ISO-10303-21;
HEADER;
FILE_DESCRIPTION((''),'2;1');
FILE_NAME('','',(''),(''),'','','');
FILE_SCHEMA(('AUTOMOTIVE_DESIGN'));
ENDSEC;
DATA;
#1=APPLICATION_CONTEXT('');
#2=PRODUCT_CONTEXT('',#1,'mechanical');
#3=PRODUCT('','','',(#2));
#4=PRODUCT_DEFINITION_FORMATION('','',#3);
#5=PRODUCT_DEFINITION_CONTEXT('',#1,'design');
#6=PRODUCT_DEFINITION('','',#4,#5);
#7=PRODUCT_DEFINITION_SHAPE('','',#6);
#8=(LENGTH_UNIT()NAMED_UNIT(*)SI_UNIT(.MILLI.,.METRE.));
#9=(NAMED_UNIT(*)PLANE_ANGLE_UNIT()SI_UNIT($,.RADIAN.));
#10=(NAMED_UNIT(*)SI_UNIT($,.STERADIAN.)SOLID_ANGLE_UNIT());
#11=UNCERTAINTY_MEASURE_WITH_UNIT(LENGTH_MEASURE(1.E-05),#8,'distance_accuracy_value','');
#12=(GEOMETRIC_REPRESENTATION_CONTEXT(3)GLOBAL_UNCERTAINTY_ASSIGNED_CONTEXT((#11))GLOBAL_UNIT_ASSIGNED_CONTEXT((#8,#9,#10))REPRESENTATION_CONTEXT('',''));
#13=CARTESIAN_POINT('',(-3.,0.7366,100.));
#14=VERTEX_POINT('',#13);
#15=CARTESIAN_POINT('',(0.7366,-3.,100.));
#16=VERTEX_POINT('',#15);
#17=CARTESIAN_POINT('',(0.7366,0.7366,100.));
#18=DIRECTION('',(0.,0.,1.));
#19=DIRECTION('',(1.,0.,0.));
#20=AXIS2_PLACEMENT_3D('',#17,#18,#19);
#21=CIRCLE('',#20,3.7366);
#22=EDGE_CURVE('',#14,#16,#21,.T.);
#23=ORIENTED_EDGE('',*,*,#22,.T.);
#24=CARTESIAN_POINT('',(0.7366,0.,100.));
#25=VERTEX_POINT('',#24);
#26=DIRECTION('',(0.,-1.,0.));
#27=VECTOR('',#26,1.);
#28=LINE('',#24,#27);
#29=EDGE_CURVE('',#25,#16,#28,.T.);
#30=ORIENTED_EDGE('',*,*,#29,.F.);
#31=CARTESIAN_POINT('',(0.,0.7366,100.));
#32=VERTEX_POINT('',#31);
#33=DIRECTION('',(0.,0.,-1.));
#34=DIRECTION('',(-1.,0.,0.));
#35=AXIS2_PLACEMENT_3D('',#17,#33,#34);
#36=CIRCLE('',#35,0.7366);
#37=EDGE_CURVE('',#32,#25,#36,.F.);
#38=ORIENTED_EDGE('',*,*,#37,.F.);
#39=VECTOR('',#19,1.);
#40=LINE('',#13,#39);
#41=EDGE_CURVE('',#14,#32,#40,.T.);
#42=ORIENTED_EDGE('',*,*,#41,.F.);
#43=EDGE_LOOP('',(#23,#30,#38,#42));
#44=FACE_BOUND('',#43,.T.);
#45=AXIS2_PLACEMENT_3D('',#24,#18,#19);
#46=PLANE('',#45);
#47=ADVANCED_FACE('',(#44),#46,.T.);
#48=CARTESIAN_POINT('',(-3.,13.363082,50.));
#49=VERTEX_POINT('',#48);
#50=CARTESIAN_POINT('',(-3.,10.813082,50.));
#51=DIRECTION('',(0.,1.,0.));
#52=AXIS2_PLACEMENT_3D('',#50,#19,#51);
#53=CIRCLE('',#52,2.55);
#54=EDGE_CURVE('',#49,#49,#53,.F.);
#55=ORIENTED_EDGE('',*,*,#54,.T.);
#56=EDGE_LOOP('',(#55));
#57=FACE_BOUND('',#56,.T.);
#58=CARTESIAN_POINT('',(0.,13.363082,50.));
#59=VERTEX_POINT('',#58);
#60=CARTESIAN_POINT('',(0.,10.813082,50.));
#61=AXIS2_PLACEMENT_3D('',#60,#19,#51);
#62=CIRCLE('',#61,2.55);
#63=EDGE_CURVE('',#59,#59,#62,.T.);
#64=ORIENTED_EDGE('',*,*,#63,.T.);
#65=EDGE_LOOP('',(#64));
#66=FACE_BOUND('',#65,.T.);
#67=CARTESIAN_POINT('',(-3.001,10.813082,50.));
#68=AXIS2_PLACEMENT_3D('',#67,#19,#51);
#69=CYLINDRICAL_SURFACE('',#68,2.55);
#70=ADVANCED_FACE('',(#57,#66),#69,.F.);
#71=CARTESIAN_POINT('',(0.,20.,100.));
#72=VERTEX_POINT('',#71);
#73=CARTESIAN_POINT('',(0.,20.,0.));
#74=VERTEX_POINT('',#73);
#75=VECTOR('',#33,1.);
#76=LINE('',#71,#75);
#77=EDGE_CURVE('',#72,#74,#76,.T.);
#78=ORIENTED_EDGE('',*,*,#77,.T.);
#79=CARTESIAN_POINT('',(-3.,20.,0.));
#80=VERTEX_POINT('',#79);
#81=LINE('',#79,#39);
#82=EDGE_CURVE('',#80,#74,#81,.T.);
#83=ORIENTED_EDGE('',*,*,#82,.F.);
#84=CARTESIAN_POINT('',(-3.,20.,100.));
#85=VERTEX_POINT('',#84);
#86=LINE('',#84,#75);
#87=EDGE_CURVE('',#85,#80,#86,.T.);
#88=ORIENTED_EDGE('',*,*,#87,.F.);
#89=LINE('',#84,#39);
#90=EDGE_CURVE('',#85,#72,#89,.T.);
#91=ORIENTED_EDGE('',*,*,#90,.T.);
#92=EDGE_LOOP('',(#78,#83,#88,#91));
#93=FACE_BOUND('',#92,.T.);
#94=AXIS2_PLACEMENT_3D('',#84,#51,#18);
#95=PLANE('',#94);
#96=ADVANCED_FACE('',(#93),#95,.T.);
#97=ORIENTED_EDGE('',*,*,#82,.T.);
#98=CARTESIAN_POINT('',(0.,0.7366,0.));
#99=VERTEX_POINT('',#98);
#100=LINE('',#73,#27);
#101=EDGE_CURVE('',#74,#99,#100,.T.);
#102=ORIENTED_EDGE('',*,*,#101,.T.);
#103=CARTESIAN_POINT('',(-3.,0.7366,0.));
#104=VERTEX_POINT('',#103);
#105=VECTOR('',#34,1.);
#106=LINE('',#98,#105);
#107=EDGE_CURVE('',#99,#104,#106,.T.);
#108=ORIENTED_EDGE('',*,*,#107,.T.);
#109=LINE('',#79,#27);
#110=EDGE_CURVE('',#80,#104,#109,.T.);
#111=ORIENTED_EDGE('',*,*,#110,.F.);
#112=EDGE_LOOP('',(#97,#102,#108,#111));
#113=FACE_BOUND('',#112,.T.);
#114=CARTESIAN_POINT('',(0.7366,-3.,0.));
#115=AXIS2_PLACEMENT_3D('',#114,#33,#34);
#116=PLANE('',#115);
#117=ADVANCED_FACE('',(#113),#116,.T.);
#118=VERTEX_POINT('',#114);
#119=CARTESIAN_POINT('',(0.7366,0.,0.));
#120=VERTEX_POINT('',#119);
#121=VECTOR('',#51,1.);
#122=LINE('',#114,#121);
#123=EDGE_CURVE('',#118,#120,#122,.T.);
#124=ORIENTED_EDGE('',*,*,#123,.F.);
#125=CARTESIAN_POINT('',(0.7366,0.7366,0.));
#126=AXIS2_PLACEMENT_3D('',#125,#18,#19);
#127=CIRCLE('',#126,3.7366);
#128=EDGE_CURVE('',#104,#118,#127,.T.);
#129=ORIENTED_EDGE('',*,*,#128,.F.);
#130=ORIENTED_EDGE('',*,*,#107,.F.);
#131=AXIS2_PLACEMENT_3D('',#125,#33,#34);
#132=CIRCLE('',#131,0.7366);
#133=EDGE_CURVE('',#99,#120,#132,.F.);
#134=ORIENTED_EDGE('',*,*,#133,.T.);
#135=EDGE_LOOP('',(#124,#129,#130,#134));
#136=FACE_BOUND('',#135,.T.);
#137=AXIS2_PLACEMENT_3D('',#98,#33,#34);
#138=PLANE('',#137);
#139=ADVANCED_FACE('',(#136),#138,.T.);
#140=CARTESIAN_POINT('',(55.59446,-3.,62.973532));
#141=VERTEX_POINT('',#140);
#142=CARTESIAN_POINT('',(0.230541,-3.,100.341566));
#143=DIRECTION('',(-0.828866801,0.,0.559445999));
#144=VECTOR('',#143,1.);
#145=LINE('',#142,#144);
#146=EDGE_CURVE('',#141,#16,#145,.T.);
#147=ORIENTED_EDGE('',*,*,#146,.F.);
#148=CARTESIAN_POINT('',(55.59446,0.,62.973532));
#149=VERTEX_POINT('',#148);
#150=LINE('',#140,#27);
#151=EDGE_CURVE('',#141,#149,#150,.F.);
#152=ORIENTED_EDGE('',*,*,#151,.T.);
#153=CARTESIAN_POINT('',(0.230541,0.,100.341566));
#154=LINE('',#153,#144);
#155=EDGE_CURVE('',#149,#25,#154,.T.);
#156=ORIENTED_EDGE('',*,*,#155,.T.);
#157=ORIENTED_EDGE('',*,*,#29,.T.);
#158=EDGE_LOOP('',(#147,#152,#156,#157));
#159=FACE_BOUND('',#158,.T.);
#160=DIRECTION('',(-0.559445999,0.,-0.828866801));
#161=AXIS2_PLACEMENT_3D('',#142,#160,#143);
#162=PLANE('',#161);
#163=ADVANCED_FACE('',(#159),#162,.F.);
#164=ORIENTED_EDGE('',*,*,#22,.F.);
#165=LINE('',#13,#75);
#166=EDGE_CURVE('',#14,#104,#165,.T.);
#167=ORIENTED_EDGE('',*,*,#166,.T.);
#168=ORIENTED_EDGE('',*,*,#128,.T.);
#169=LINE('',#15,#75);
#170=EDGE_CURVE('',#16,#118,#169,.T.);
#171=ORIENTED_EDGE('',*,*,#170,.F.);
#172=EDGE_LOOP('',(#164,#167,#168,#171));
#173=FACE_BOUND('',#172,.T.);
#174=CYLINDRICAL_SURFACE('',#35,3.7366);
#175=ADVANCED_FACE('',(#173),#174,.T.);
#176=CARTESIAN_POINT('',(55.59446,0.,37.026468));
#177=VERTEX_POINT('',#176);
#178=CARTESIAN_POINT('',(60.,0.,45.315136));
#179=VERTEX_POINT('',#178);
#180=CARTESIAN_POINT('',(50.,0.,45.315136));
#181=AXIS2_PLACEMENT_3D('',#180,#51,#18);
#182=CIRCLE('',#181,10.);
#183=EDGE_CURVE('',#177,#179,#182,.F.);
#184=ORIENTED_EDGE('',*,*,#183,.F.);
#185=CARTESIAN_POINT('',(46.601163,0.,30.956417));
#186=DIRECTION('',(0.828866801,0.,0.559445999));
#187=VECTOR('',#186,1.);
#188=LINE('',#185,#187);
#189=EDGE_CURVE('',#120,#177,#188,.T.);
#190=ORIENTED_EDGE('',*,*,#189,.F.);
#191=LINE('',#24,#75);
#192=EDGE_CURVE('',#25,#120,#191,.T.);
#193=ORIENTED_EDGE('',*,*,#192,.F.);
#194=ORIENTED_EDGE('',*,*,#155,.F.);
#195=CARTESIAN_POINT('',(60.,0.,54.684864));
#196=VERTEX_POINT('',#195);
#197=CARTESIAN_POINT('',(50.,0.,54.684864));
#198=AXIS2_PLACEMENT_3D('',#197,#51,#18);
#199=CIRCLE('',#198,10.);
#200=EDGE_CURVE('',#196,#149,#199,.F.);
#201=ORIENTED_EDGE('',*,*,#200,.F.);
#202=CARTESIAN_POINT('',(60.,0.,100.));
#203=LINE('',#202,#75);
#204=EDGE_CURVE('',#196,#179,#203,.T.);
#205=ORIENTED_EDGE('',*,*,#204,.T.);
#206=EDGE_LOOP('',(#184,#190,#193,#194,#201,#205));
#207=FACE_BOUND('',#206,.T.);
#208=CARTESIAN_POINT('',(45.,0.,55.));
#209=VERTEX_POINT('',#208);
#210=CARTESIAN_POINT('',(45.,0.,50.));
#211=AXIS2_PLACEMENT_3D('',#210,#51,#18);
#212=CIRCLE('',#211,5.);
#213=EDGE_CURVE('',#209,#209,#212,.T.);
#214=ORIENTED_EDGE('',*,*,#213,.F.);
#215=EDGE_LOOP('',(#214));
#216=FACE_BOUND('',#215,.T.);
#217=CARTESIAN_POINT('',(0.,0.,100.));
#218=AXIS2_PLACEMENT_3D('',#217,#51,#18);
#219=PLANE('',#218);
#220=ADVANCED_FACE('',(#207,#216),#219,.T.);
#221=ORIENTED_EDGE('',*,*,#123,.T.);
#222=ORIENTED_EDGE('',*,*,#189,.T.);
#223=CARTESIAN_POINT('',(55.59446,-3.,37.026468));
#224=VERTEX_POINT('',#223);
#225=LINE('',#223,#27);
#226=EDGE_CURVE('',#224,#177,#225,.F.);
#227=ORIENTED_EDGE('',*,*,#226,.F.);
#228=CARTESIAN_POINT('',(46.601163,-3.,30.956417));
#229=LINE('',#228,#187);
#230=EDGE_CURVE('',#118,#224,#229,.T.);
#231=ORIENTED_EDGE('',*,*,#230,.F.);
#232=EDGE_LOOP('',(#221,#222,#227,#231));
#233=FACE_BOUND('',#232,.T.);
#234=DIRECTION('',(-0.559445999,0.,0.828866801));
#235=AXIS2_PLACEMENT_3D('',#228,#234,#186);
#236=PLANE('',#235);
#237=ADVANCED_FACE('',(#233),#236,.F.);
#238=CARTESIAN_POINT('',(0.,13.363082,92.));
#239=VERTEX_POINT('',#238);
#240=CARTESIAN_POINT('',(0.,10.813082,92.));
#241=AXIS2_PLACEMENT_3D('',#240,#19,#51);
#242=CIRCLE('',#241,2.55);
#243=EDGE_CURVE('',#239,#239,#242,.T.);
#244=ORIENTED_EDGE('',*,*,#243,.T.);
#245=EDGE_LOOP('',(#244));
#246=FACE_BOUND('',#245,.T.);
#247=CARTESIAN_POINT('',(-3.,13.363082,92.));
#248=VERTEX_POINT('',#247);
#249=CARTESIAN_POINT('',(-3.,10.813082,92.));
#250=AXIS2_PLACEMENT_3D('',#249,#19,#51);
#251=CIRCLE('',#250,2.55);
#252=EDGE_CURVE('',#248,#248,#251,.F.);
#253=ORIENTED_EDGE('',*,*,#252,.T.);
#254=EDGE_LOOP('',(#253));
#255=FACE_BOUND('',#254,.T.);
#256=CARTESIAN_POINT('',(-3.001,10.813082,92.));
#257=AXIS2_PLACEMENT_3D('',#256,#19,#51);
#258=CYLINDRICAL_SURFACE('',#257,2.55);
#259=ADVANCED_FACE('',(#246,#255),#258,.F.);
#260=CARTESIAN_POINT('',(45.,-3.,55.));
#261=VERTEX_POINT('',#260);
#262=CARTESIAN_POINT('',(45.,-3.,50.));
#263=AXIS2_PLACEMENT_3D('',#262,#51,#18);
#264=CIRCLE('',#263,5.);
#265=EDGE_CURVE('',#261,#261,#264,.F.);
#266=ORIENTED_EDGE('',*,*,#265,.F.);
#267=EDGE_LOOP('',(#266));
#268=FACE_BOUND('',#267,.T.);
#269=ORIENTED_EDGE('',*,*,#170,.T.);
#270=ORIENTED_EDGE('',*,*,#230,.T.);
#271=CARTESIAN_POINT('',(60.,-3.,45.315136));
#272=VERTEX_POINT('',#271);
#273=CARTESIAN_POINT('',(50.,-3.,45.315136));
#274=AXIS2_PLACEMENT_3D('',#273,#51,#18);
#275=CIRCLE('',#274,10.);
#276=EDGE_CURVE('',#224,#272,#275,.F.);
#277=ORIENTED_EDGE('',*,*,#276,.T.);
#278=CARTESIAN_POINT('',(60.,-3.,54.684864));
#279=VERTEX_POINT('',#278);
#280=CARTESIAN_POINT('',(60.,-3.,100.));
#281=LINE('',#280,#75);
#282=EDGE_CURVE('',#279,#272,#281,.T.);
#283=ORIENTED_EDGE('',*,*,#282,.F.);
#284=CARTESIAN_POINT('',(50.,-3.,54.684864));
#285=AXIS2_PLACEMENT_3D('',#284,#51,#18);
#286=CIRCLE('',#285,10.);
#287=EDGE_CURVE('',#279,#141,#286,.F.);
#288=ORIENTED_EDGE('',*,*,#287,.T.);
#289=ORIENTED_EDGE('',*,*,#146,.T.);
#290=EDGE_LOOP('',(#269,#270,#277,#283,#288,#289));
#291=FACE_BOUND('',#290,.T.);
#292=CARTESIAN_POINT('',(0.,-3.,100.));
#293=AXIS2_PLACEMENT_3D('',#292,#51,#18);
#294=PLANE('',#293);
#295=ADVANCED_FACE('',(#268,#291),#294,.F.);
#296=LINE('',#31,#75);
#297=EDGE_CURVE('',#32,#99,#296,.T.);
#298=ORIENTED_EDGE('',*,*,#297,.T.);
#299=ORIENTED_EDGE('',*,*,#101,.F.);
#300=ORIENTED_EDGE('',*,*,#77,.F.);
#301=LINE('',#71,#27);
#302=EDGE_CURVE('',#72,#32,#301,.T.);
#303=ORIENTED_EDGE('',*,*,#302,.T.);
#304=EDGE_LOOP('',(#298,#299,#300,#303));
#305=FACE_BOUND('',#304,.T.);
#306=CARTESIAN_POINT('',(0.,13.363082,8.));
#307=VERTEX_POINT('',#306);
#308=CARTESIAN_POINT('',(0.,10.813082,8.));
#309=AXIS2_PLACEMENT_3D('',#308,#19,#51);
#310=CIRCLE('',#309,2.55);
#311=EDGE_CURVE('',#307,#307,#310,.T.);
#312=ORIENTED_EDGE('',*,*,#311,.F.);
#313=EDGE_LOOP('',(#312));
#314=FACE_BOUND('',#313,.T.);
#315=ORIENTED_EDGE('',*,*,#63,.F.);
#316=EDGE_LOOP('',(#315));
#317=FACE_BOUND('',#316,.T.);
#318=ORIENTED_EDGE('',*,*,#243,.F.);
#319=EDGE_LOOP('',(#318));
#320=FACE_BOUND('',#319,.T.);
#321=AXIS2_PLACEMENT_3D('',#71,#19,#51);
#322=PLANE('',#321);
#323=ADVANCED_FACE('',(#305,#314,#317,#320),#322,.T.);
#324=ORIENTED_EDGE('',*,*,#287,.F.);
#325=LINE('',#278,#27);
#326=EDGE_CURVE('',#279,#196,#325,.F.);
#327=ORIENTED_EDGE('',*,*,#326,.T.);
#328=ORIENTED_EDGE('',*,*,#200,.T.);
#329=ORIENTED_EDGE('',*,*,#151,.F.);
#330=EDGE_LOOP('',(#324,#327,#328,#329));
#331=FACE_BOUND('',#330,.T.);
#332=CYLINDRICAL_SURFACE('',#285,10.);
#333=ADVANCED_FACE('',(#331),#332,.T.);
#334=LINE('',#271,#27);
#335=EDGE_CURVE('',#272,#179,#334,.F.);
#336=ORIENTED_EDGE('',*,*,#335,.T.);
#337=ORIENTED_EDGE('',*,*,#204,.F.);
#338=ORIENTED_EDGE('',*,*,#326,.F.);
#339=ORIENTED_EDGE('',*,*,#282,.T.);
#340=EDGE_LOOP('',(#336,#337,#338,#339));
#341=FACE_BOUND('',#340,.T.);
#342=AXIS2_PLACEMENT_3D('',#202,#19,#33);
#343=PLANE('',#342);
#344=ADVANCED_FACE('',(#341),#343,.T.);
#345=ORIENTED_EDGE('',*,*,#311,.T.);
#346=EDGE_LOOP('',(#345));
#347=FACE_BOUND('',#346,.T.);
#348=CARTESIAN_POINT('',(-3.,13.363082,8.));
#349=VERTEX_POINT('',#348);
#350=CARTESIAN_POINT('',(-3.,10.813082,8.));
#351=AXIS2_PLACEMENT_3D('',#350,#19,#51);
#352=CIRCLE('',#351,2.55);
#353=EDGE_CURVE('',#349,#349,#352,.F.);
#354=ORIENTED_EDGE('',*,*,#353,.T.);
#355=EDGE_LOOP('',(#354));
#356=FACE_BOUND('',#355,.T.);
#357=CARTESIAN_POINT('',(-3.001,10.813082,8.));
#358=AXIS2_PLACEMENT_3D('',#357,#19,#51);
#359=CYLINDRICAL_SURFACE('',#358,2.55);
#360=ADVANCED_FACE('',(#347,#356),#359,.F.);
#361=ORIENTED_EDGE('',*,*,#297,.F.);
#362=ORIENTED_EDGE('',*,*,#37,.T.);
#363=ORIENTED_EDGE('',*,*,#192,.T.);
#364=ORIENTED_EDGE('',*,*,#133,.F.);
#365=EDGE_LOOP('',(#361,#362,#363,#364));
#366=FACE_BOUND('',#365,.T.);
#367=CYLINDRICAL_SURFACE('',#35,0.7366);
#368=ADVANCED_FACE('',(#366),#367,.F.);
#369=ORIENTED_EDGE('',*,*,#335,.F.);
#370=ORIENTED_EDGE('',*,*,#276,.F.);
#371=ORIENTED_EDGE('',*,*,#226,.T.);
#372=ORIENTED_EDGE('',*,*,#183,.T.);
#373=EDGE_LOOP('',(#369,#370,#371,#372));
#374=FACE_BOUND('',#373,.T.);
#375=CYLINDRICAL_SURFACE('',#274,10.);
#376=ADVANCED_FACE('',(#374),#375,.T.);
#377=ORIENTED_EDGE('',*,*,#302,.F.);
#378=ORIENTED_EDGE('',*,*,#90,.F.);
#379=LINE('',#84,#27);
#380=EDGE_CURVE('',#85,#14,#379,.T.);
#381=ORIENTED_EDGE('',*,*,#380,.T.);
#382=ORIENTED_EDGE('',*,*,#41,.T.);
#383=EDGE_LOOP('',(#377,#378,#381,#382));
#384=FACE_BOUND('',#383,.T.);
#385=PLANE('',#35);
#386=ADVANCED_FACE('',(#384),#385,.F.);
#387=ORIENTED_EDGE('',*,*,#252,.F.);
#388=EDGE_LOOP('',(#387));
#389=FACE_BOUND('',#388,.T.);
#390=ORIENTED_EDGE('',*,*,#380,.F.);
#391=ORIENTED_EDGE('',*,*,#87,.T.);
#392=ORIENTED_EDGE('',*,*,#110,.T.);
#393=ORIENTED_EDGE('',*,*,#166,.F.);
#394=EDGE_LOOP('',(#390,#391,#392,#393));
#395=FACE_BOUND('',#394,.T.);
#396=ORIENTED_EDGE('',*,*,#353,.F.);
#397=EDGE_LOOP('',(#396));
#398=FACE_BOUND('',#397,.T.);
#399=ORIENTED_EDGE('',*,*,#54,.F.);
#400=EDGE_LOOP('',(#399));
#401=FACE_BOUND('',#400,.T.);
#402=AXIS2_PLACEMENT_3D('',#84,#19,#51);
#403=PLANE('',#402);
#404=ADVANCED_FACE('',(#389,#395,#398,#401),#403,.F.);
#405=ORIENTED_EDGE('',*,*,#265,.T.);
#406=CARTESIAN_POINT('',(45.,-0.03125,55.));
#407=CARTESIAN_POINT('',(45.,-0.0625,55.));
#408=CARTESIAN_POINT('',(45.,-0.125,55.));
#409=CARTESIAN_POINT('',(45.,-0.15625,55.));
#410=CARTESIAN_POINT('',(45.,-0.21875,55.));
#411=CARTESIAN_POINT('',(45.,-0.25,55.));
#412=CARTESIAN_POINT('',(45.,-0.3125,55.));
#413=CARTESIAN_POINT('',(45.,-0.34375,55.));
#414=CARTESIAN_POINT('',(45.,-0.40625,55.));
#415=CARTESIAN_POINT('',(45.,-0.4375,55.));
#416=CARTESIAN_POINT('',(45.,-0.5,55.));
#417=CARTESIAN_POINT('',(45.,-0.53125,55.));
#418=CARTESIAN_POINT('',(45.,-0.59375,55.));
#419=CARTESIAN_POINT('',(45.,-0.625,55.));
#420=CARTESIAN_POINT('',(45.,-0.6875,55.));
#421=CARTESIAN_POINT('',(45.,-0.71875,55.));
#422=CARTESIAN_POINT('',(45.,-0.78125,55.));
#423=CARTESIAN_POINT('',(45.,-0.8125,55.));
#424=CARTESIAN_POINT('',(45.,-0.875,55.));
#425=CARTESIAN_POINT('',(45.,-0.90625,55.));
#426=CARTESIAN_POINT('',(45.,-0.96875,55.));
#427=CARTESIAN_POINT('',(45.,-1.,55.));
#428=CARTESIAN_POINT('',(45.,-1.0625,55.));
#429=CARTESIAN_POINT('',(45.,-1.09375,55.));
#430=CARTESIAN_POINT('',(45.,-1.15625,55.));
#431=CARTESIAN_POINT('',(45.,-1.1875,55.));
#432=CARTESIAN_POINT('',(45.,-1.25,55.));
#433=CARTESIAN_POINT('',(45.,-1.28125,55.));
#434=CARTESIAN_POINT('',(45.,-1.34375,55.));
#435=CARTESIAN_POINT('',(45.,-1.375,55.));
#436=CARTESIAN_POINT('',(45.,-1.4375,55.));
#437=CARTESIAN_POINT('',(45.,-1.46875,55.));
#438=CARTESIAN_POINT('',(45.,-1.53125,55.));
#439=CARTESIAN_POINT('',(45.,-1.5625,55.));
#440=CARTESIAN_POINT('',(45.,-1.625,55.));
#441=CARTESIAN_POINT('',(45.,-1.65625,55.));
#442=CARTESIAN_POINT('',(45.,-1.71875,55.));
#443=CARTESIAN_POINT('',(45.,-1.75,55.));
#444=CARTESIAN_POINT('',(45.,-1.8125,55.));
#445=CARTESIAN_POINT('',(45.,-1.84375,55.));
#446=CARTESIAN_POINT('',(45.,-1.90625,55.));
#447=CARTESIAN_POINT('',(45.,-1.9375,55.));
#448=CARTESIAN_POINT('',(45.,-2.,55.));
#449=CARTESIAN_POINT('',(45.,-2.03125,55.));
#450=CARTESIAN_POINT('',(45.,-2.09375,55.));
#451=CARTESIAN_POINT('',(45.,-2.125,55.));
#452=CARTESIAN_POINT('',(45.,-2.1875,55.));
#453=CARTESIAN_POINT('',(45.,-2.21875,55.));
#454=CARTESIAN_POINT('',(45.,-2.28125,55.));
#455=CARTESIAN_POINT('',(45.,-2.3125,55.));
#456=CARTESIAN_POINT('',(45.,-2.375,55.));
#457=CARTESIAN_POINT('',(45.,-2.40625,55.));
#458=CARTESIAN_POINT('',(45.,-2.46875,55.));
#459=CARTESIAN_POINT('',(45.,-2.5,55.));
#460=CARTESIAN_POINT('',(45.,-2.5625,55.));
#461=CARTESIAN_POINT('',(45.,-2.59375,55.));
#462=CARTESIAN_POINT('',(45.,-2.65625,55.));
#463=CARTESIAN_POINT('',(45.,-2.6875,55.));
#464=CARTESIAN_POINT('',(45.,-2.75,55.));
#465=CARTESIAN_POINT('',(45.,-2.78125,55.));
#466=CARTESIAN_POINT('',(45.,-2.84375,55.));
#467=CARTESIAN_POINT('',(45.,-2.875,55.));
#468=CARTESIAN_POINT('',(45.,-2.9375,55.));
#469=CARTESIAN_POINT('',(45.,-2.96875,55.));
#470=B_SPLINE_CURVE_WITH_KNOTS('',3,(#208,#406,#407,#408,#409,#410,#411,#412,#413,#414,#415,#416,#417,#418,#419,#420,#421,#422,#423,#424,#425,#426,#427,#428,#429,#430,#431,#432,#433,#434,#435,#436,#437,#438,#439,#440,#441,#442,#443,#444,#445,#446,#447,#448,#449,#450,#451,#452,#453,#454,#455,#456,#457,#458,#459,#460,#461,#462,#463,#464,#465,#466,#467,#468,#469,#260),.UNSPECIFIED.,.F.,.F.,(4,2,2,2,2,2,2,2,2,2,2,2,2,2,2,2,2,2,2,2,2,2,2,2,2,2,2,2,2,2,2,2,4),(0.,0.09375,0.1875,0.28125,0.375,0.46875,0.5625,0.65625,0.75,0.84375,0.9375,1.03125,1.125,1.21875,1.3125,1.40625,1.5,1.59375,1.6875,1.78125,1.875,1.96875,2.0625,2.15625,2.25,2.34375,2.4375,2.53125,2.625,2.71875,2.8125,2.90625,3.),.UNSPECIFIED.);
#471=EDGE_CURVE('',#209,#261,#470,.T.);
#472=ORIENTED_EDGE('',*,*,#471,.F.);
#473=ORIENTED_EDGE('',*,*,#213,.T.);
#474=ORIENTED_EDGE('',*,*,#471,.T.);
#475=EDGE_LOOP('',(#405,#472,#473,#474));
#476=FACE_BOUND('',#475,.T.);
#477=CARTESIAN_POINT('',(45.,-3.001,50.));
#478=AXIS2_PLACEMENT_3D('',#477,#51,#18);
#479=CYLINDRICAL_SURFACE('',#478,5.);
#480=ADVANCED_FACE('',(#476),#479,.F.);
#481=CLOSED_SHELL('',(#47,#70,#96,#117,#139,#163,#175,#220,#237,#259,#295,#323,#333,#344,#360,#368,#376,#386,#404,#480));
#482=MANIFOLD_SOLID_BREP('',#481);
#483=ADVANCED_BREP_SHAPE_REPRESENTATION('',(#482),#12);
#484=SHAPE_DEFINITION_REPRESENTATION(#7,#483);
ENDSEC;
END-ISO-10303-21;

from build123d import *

# Parameters (mm, degrees)
BASE_FLANGE1_DEPTH = 100
CUT_EXTRUDE1_REACH = 120.322
SKETCH6_R          = 2.55
CUT_EXTRUDE2_REACH = 120.322
SKETCH7_R          = 5
CUT_EXTRUDE4_DEPTH = 10


# Sheet-metal steps are written as plain solids
with BuildPart() as part:
    # Sketch1 → Base-Flange1 (new body)
    with BuildSketch(Plane.XY):
        with BuildLine():
            Line((0, 20), (0, 0.7366))
            ThreePointArc((0, 0.7366), (0.215745145, 0.215745145), (0.7366, 0))
            Line((0.7366, 0), (60, 0))
            Line((60, 0), (60, -3))
            Line((60, -3), (0.7366, -3))
            ThreePointArc((0.7366, -3), (-1.905575199, -1.905575199), (-3, 0.7366))
            Line((-3, 0.7366), (-3, 20))
            Line((-3, 20), (0, 20))
        make_face()
    extrude(amount=BASE_FLANGE1_DEPTH)

    # Sketch6 → Cut-Extrude1 (cut, up to next)
    with BuildSketch(Plane(origin=(0, 0, 0), x_dir=(0, 0, -1), z_dir=(1, 0, 0)), mode=Mode.PRIVATE) as cut_extrude1_sk1:
        with Locations(Location((-92, 10.813082186, 0), (0, 0, 90))):
            Circle(SKETCH6_R)
    cut_extrude1_tool1 = extrude(cut_extrude1_sk1.sketch, amount=-CUT_EXTRUDE1_REACH, mode=Mode.PRIVATE) & part.part
    # Sketch6 → Cut-Extrude1 (cut, up to next)
    with BuildSketch(Plane(origin=(0, 0, 0), x_dir=(0, 0, -1), z_dir=(1, 0, 0)), mode=Mode.PRIVATE) as cut_extrude1_sk2:
        with Locations(Location((-8, 10.813082186, 0), (0, 0, 90))):
            Circle(SKETCH6_R)
    cut_extrude1_tool2 = extrude(cut_extrude1_sk2.sketch, amount=-CUT_EXTRUDE1_REACH, mode=Mode.PRIVATE) & part.part
    # Sketch6 → Cut-Extrude1 (cut, up to next)
    with BuildSketch(Plane(origin=(0, 0, 0), x_dir=(0, 0, -1), z_dir=(1, 0, 0)), mode=Mode.PRIVATE) as cut_extrude1_sk3:
        with Locations(Location((-50, 10.813082186, 0), (0, 0, 90))):
            Circle(SKETCH6_R)
    cut_extrude1_tool3 = extrude(cut_extrude1_sk3.sketch, amount=-CUT_EXTRUDE1_REACH, mode=Mode.PRIVATE) & part.part
    add(cut_extrude1_tool1.solids().sort_by_distance((0, 10.813082, 92))[0], mode=Mode.SUBTRACT)
    add(cut_extrude1_tool2.solids().sort_by_distance((0, 10.813082, 8))[0], mode=Mode.SUBTRACT)
    add(cut_extrude1_tool3.solids().sort_by_distance((0, 10.813082, 50))[0], mode=Mode.SUBTRACT)

    # Sketch7 → Cut-Extrude2 (cut, up to next)
    with BuildSketch(Plane(origin=(0, 0, 0), x_dir=(1, 0, 0), z_dir=(0, 1, 0)), mode=Mode.PRIVATE) as cut_extrude2_sk1:
        with Locations(Location((45, -50, 0), (0, 0, 270))):
            Circle(SKETCH7_R)
    cut_extrude2_tool1 = extrude(cut_extrude2_sk1.sketch, amount=-CUT_EXTRUDE2_REACH, mode=Mode.PRIVATE) & part.part
    add(cut_extrude2_tool1.solids().sort_by_distance((45, 0, 50))[0], mode=Mode.SUBTRACT)

    # Sketch8 → Cut-Extrude4 (cut)
    with BuildSketch(Plane(origin=(0, 0, 0), x_dir=(1, 0, 0), z_dir=(0, 1, 0))):
        with BuildLine():
            Line((0.7366, 0), (55.594459994, -37.026468271))
            ThreePointArc((55.594459994, -37.026468271), (58.830192522, -40.621768617), (60, -45.315136281))
            Line((60, -45.315136281), (60, -54.684863719))
            ThreePointArc((60, -54.684863719), (58.830192522, -59.378231383), (55.594459994, -62.973531729))
            Line((55.594459994, -62.973531729), (0.7366, -100))
            Line((0.7366, -100), (64.682636993, -100))
            Line((64.682636993, -100), (64.682636993, 0))
            Line((64.682636993, 0), (0.7366, 0))
        make_face()
    extrude(amount=-CUT_EXTRUDE4_DEPTH, mode=Mode.SUBTRACT)


solid = part.part
